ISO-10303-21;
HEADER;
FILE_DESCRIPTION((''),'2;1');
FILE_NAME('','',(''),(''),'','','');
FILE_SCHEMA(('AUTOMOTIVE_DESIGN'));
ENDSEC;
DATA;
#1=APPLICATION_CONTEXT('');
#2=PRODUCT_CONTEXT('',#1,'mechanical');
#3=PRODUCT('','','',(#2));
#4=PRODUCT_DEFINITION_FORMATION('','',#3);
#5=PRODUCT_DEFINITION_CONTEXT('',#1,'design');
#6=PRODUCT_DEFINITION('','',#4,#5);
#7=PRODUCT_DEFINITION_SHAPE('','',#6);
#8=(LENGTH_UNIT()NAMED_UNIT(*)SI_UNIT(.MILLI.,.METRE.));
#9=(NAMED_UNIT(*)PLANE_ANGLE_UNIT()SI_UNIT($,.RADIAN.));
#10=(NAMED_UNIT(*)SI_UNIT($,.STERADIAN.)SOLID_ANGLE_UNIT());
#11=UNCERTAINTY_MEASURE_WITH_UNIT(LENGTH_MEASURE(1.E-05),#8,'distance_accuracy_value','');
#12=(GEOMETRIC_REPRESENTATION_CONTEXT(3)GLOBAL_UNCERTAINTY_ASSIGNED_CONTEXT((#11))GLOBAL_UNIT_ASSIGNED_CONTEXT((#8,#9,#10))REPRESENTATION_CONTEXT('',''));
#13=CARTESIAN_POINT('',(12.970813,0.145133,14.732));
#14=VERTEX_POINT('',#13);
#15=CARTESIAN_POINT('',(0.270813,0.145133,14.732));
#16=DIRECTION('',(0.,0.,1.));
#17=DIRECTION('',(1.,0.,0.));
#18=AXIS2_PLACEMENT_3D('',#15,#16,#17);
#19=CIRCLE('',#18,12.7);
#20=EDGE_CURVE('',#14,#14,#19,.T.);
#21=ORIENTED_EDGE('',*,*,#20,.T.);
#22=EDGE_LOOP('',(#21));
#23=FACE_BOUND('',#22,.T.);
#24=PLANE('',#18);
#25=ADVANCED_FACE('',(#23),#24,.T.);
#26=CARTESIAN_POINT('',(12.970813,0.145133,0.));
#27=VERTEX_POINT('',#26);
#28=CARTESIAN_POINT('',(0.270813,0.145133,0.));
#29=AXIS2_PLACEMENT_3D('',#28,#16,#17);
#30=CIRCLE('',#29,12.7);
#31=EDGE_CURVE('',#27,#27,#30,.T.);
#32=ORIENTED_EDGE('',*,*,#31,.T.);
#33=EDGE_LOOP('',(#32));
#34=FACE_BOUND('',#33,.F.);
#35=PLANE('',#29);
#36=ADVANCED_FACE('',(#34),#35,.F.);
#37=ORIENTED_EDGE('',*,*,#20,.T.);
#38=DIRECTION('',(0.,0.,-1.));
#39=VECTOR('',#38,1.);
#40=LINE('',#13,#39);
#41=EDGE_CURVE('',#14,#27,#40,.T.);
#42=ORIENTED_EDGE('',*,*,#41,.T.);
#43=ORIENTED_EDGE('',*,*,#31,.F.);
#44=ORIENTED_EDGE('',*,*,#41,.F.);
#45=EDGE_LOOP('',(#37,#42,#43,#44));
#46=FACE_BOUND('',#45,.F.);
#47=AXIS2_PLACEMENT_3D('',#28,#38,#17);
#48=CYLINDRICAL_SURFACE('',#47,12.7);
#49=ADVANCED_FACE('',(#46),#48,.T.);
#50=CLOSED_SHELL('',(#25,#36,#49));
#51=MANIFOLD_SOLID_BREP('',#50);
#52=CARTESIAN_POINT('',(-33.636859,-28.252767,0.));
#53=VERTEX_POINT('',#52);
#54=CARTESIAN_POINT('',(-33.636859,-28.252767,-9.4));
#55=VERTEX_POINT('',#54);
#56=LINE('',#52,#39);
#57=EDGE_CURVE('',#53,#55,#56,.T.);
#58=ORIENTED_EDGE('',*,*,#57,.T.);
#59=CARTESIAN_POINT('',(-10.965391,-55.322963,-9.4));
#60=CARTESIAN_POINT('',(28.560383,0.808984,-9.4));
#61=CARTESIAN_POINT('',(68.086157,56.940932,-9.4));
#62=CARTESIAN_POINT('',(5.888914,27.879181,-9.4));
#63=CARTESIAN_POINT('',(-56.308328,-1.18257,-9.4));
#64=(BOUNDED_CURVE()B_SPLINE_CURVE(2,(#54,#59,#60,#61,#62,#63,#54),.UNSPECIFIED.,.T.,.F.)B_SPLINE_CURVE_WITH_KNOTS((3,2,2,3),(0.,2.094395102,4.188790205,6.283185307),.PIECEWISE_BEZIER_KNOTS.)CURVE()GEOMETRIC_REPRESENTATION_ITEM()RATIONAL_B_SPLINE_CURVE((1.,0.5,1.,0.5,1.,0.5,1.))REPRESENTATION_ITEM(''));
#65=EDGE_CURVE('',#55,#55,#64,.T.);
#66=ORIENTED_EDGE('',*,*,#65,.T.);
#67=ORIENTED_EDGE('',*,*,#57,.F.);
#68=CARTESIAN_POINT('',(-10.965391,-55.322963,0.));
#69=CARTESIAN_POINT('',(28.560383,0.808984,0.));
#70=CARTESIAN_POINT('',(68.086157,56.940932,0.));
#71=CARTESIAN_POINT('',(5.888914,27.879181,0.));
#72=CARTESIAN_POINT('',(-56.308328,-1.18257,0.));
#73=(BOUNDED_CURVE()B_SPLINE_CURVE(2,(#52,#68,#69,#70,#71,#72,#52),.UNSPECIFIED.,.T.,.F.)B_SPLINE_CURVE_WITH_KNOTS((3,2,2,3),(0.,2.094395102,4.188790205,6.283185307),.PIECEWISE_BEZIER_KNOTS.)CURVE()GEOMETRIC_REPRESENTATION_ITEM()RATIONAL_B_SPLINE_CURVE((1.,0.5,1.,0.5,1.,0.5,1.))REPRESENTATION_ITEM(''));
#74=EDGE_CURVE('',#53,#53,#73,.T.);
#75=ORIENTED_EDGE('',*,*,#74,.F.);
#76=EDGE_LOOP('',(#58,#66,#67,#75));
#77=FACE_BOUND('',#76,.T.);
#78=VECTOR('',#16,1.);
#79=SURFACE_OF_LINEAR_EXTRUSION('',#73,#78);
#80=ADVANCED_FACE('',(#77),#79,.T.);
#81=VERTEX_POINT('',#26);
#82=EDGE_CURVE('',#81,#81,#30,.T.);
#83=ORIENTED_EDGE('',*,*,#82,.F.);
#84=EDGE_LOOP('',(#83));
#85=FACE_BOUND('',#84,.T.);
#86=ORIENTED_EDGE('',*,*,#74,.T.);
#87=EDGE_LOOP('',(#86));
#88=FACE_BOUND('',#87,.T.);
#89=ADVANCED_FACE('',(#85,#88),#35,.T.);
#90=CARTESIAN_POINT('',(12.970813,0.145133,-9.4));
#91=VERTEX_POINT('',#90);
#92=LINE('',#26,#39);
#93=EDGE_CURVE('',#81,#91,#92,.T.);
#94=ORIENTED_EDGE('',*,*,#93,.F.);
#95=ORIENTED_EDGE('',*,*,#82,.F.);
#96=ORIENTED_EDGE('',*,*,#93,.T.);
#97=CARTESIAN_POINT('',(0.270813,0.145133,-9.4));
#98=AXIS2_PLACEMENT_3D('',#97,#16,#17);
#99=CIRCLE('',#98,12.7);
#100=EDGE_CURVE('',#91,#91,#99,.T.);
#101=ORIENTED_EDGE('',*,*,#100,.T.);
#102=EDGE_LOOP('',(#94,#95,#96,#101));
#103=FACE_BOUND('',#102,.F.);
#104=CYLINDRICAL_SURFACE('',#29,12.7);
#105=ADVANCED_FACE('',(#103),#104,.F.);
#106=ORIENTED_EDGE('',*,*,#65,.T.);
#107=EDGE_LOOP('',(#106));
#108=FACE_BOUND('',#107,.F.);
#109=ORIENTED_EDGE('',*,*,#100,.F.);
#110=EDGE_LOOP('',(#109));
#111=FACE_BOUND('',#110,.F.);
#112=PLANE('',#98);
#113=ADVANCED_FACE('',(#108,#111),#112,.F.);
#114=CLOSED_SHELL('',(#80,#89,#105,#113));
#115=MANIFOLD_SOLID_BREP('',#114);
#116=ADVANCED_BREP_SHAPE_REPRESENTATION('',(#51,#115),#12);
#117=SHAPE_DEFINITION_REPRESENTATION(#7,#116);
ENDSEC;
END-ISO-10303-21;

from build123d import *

# Parameters (mm, degrees)
F0_R      = 12.7
F1_DEPTH  = 14.732
F1_FACE_R = 12.7
F3_DEPTH  = 9.4


# Not quite as in the source:
# - the program builds the solid bodies; features that only make, move or delete a surface that nothing else refers to are left out


with BuildPart() as f1:
    # F0 (on Top) → F1 (new body)
    with BuildSketch(Plane.XY):
        with Locations((0.2708127431, 0.1451327698)):
            Circle(F0_R)
    extrude(amount=F1_DEPTH)

    # F0 (on Top) + F1_face (on face) → F3 (join)
    with BuildSketch(Plane.XY):
        with BuildLine():
            add(Edge.make_bspline(
                [(-33.6368591517, -28.2527666673), (-10.9653906557, -55.322963068), (28.5603829384, 0.8089842881), (68.0861565326, 56.9409316442), (5.8889144425, 27.8791806888), (-56.3083276476, -1.1825702666), (-33.6368591517, -28.2527666673)],
                knots=[0, 0, 0, 2.0943951024, 2.0943951024, 4.1887902048, 4.1887902048, 6.2831853072, 6.2831853072, 6.2831853072], degree=2, weights=[1, 0.5, 1, 0.5, 1, 0.5, 1]))
        make_face()
        with Locations((0.2708127431, 0.1451327698)):
            Circle(F0_R, mode=Mode.SUBTRACT)
    with BuildSketch(Plane(origin=(0.2708127431, 0.1451327698, 14.732), x_dir=(1, 0, 0), z_dir=(0, 0, 1))):
        Circle(F1_FACE_R)
    extrude(amount=-F3_DEPTH)


solid = f1.part
